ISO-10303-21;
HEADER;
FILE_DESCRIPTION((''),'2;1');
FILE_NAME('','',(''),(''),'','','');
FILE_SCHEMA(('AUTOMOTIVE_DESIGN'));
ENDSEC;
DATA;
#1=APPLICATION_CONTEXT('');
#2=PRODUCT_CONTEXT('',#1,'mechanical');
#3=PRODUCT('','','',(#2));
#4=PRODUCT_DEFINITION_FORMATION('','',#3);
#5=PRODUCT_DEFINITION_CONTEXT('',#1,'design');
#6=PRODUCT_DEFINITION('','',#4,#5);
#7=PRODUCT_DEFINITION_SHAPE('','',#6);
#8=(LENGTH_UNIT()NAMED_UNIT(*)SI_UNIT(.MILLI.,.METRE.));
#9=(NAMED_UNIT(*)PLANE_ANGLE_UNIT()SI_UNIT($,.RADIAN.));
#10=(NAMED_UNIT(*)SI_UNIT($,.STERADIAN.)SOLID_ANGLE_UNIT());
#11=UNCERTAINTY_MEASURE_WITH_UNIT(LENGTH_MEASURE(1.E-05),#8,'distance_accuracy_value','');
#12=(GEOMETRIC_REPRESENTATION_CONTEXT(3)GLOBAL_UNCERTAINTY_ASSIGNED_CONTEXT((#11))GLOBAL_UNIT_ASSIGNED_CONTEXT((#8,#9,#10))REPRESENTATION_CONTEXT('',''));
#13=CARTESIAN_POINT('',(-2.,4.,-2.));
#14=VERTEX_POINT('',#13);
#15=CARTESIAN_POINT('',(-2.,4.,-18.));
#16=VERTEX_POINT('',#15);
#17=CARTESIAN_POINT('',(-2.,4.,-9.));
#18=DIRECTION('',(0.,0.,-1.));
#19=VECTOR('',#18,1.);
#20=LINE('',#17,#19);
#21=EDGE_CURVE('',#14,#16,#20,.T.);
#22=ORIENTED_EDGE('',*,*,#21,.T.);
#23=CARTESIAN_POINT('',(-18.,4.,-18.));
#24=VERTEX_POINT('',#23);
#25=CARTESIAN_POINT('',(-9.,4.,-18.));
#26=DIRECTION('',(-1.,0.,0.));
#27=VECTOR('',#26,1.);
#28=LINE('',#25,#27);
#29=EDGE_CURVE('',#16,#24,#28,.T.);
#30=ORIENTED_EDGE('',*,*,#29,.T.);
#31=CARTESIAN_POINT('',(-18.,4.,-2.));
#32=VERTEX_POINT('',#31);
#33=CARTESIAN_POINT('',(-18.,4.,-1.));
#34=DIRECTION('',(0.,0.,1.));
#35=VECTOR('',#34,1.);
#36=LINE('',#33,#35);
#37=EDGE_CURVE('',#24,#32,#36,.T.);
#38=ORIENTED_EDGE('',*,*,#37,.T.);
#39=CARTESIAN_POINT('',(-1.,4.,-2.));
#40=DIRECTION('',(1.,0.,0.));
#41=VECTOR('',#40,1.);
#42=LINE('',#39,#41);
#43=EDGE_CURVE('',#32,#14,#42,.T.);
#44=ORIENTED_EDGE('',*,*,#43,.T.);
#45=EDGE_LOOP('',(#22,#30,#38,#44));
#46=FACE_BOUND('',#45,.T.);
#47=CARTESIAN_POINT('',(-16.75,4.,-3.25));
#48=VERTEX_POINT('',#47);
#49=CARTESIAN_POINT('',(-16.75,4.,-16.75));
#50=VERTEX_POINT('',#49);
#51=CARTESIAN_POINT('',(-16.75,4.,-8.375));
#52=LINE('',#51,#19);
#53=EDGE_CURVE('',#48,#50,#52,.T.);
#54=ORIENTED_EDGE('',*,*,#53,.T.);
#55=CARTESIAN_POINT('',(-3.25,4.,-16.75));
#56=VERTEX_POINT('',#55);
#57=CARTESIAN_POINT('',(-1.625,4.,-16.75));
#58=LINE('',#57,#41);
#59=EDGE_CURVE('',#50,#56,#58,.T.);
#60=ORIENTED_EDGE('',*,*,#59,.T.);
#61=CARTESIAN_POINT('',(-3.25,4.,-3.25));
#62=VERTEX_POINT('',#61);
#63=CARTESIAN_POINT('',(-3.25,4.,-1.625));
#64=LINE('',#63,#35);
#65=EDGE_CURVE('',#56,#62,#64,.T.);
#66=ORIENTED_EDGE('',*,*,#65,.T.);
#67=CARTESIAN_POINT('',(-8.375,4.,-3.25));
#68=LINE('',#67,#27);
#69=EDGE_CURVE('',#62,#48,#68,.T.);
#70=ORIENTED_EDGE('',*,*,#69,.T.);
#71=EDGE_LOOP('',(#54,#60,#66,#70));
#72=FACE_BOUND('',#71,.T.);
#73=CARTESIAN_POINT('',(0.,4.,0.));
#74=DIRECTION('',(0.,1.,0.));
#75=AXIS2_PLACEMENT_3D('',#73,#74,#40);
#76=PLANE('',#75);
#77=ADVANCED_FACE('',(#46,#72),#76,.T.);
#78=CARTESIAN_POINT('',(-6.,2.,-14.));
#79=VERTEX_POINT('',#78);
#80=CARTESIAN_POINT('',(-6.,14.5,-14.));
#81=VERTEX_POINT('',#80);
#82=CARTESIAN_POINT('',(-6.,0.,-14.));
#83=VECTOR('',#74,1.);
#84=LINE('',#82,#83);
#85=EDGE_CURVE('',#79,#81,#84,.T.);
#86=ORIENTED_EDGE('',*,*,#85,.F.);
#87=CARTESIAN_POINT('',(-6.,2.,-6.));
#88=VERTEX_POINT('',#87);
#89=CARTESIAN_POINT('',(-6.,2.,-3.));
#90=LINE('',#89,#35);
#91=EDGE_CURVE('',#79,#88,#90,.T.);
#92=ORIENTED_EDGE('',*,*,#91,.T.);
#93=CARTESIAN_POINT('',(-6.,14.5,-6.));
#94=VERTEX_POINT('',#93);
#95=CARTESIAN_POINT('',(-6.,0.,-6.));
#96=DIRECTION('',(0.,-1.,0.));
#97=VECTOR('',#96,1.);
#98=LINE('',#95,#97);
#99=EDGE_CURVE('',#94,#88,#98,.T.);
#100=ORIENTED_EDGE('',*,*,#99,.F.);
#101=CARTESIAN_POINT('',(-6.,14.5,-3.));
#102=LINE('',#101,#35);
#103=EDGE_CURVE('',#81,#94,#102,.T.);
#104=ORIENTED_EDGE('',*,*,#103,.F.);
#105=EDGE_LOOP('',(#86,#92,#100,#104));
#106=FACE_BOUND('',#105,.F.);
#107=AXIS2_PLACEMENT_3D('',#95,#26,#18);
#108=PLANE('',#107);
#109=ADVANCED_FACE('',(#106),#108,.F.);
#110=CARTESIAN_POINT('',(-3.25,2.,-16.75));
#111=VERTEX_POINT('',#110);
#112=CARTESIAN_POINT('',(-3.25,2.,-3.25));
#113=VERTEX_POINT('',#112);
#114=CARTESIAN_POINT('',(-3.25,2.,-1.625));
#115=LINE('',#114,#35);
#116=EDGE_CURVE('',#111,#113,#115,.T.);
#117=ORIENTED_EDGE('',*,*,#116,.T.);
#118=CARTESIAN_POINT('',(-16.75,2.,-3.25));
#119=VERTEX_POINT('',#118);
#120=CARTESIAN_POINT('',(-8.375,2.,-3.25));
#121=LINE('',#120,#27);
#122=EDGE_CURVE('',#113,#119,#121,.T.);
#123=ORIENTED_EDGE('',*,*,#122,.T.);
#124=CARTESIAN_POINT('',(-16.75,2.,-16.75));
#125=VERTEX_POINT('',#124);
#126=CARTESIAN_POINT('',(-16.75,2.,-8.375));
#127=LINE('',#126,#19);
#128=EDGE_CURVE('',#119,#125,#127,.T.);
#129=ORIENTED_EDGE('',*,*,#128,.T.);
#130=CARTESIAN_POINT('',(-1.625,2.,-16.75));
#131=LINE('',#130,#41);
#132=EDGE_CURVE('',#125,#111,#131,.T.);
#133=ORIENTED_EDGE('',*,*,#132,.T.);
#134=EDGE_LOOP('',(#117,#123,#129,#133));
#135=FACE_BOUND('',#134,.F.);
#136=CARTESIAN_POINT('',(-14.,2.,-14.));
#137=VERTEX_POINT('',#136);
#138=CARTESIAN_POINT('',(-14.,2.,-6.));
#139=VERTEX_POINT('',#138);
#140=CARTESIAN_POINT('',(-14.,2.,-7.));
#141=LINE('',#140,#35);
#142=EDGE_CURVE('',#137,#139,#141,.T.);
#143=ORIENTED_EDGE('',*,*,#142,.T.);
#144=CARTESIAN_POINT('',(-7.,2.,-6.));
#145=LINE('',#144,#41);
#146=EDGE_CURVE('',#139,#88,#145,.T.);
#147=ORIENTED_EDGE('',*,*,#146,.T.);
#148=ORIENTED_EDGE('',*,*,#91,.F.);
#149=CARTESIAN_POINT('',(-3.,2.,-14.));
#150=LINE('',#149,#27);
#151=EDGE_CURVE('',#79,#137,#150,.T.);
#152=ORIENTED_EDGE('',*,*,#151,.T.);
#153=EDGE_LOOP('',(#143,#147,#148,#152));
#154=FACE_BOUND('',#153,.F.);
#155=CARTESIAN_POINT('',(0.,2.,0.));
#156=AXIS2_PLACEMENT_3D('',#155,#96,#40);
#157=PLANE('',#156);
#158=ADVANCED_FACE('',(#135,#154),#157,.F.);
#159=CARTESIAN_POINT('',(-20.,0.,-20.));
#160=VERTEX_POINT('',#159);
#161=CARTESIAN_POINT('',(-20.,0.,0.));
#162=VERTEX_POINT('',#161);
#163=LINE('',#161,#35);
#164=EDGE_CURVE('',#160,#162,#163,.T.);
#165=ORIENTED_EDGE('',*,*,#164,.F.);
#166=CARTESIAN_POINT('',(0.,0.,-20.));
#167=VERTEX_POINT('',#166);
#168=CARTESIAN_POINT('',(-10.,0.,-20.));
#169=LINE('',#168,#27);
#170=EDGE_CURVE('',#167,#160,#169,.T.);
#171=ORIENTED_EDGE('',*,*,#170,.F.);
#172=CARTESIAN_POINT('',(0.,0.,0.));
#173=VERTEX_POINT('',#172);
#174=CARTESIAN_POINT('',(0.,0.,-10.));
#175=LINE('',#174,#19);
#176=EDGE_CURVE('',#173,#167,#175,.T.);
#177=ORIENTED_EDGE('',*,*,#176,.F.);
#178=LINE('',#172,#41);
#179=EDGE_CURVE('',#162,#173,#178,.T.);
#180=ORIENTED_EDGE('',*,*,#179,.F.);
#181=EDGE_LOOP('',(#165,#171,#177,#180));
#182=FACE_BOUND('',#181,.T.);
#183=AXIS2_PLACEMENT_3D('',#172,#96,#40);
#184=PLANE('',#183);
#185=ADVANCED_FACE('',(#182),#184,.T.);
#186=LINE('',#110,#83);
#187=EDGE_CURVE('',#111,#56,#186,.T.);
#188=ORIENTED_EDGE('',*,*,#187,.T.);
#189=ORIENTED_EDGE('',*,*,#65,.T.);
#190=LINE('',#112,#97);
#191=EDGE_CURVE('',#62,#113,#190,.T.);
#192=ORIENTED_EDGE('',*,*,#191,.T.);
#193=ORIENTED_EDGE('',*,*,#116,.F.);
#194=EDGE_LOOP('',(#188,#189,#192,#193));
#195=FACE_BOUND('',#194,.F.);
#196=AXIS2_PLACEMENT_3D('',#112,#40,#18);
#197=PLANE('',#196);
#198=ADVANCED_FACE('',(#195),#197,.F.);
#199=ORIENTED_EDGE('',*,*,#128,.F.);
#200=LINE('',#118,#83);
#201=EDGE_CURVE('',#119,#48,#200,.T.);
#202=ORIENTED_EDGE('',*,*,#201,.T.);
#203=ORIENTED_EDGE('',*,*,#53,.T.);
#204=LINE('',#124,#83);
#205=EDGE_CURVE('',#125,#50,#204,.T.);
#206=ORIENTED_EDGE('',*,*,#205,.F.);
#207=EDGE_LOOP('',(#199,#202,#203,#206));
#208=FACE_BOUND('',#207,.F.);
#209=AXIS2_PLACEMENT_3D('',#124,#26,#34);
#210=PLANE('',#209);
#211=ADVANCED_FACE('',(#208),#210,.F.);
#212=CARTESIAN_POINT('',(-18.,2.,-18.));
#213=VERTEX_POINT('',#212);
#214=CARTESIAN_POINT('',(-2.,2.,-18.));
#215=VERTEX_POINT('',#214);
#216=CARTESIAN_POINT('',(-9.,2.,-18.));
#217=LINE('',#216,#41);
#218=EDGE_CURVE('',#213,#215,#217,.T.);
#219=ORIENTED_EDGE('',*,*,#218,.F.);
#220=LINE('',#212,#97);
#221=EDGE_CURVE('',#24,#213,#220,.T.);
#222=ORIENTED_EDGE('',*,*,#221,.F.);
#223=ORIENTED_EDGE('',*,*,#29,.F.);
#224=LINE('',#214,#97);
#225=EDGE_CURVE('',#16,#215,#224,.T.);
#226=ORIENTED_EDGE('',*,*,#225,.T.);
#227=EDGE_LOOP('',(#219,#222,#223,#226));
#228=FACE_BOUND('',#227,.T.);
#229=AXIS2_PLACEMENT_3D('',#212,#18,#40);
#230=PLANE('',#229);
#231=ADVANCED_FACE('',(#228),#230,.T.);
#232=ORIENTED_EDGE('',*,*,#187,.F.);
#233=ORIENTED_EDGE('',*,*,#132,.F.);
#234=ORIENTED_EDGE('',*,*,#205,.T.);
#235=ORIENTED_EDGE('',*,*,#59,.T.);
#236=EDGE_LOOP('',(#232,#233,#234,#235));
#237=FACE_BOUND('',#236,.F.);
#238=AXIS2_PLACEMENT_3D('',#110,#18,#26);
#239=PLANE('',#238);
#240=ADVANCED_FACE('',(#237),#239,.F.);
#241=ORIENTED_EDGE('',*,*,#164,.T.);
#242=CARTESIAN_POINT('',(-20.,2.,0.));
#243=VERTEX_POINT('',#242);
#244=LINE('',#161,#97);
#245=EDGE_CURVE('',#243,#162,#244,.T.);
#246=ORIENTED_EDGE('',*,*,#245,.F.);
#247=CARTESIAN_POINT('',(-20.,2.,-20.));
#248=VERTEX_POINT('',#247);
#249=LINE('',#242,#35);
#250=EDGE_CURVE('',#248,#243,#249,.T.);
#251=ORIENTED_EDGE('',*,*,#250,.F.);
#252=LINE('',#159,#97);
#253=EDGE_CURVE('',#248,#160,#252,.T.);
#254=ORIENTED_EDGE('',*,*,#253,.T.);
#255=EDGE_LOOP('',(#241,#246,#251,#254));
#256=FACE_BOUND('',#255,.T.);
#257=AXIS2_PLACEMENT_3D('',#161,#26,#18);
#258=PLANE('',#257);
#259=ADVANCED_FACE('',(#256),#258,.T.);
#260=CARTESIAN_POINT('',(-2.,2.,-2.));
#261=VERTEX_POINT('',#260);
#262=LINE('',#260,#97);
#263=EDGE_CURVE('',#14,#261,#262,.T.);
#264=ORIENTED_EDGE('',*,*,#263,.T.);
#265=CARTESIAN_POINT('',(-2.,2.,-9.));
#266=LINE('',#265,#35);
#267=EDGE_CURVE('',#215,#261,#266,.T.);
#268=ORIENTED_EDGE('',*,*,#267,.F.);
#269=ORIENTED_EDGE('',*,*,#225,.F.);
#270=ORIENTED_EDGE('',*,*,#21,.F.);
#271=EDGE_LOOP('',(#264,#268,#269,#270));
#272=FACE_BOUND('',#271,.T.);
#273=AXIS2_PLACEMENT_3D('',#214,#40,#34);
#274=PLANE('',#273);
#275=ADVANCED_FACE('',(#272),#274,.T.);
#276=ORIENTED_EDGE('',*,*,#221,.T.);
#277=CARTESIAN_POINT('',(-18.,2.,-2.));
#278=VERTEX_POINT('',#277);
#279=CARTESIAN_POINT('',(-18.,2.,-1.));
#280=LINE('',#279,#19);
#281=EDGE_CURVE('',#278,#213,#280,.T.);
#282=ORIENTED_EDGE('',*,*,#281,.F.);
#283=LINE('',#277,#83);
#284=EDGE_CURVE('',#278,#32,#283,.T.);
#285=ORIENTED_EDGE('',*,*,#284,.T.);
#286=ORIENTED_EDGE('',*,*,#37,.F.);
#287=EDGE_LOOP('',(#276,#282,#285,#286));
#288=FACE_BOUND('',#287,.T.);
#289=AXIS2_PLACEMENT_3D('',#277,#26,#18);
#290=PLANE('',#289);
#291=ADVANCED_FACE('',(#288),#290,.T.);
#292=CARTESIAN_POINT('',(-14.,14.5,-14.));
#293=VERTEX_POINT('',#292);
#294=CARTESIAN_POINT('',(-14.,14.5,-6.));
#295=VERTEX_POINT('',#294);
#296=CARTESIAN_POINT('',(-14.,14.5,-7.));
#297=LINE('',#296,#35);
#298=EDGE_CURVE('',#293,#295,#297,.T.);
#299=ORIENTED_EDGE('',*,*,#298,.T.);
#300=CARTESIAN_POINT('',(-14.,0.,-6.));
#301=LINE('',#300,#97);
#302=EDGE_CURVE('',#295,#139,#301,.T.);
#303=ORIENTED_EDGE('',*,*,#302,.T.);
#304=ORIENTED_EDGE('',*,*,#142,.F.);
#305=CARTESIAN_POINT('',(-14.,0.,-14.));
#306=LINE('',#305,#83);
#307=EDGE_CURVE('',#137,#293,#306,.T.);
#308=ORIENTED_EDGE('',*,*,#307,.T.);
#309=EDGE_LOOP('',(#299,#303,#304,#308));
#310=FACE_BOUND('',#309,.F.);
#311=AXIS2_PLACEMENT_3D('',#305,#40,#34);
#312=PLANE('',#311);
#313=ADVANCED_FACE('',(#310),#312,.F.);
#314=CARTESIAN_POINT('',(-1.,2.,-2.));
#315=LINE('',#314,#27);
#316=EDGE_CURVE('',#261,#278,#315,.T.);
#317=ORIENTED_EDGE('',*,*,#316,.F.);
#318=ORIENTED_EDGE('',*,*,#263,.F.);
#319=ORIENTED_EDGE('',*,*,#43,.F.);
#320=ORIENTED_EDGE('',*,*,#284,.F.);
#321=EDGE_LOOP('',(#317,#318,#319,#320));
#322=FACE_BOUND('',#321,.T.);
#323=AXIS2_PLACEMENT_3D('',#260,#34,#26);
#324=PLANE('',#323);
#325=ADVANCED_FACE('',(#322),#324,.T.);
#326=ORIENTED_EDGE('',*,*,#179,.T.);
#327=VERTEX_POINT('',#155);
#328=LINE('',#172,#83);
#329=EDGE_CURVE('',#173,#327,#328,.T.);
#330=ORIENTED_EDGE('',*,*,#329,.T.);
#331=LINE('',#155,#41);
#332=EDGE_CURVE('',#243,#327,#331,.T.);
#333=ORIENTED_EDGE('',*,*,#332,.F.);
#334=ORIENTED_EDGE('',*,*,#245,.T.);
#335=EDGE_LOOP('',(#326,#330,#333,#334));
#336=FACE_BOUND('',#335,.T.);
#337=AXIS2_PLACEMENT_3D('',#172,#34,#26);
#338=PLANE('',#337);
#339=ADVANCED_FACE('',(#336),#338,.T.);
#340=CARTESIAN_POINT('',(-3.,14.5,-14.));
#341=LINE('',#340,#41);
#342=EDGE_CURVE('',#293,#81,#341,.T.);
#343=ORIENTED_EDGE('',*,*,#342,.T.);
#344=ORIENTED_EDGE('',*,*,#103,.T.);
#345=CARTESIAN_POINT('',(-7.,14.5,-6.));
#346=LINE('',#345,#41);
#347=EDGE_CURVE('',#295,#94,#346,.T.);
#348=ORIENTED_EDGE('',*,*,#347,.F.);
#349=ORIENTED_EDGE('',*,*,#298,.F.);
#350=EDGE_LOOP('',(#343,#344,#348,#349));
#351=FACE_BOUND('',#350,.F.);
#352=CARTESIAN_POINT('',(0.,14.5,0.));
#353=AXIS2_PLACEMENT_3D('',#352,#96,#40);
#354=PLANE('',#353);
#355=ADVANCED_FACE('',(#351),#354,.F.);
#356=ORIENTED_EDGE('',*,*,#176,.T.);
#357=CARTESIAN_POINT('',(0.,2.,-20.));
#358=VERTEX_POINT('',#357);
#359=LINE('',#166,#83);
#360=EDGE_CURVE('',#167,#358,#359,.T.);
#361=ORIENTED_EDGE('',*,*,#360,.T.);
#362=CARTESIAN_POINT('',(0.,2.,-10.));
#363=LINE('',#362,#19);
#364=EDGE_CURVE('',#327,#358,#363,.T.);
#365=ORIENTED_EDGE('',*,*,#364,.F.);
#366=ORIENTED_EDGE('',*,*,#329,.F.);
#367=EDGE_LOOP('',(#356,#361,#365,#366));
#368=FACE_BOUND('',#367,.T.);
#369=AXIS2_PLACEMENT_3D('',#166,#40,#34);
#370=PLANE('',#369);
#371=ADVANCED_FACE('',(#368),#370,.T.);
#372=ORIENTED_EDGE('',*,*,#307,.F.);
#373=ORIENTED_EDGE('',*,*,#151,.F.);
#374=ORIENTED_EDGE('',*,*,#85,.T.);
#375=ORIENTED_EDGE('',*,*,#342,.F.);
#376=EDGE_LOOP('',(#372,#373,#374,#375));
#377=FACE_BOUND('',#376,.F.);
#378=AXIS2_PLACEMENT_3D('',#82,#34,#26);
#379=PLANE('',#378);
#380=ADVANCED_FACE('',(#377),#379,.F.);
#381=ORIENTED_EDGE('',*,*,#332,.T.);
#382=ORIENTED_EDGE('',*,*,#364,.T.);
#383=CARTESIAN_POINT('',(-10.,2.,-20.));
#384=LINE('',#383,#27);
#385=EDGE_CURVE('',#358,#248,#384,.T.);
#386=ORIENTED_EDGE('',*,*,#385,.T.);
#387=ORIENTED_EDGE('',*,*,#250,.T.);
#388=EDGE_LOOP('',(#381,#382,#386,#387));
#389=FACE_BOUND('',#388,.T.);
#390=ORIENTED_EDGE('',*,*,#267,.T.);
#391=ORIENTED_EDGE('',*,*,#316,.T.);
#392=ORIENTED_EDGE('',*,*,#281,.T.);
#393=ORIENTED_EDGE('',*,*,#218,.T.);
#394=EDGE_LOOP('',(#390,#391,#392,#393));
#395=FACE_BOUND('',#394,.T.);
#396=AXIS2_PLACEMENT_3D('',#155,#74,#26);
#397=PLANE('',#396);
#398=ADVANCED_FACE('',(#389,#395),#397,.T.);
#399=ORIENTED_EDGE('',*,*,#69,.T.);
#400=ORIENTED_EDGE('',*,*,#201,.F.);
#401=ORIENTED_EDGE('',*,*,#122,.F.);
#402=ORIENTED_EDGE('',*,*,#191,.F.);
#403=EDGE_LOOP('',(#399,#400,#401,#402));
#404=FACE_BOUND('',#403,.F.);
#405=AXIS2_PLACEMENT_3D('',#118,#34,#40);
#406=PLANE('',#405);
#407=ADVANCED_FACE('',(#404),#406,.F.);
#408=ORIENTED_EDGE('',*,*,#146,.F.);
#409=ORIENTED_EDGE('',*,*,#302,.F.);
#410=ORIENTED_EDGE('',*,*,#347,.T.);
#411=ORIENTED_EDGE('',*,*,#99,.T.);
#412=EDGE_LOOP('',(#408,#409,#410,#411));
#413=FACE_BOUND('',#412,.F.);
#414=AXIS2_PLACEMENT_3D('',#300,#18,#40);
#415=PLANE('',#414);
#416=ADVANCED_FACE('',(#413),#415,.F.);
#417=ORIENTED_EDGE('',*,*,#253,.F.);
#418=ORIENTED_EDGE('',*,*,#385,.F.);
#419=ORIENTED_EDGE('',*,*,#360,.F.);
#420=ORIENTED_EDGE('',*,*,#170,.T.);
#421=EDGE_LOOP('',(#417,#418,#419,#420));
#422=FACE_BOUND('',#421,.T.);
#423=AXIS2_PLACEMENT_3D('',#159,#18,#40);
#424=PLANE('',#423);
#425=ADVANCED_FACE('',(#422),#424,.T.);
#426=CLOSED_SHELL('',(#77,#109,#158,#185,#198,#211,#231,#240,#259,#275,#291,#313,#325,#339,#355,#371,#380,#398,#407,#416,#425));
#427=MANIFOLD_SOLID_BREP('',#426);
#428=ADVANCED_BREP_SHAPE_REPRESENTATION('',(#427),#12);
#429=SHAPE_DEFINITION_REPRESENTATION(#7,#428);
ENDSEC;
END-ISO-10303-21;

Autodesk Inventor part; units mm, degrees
ref_plane "YZ Plane" through (0, 0, 0) normal (1, 0, 0) x (0, 1, 0)
ref_plane "XZ Plane" through (0, 0, 0) normal (0, 1, 0) x (-1, 0, 0)
ref_plane "XY Plane" through (0, 0, 0) normal (0, 0, 1) x (1, 0, 0)
sketch "Sketch1" plane through (0, 0, 0) normal (0, 1, 0) x (-1, 0, 0)
  line L0 (0, 0) -> (20, 0)
  line L1 (20, 0) -> (20, -20)
  line L2 (20, -20) -> (0, -20)
  line L3 (0, -20) -> (0, 0)
  dimension "d0" = 20
  dimension "d1" = 20
extrude "Extrusion1" add sketch "Sketch1" along normal blind 2
sketch "Sketch2" plane through (0, 2, 0) normal (0, 1, 0) x (1, 0, 0)
  line L0 (0, 20) -> (-20, 20) projected
  line L1 (-20, 20) -> (-20, 0) projected
  line L2 (-20, 0) -> (0, 0) projected
  line L3 (0, 0) -> (0, 20) projected
  line L4 (-18, 2) -> (-18, 18)
  line L5 (-18, 18) -> (-2, 18)
  line L6 (-2, 18) -> (-2, 2)
  line L7 (-2, 2) -> (-18, 2)
  line L8 (-16.75, 16.75) -> (-16.75, 3.25)
  line L9 (-16.75, 3.25) -> (-3.25, 3.25)
  line L10 (-3.25, 3.25) -> (-3.25, 16.75)
  line L11 (-3.25, 16.75) -> (-16.75, 16.75)
  dimension "d4" = 2
  dimension "d5" = 1.25
extrude "Extrusion2" add sketch "Sketch2" along normal blind 2 contours L4 L5 L6 L7
extrude "Extrusion3" cut sketch "Sketch2" against normal blind 10 contours L11 L10 L9 L8
sketch "Sketch3" plane through (0, 0, 0) normal (0, -1, 0) x (1, 0, 0)
  line L0 (-3.25, -3.25) -> (-3.25, -16.75) projected
  line L1 (-3.25, -16.75) -> (-16.75, -16.75) projected
  line L2 (-16.75, -16.75) -> (-16.75, -3.25) projected
  line L3 (-16.75, -3.25) -> (-3.25, -3.25) projected
  line L4 (0, -20) -> (-20, -20) projected
  line L5 (0, 0) -> (0, -20) projected
  line L6 (-20, 0) -> (0, 0) projected
  line L7 (-20, -20) -> (-20, 0) projected
  line L8 (-6, -6) -> (-6, -14)
  line L9 (-6, -14) -> (-14, -14)
  line L10 (-14, -14) -> (-14, -6)
  line L11 (-14, -6) -> (-6, -6)
extrude "Extrusion4" add sketch "Sketch3" against normal up to surface (2 mm away) contours L0 L1 L2 L3
extrude "Extrusion5" add sketch "Sketch3" against normal blind 11.5 contours L8 L9 L10 L11
move faces "Move1" translate (0, 3, 0) faces at (-11.3333, 11.5, -8.6667)
properties part number "latticeChamberCapv4"
